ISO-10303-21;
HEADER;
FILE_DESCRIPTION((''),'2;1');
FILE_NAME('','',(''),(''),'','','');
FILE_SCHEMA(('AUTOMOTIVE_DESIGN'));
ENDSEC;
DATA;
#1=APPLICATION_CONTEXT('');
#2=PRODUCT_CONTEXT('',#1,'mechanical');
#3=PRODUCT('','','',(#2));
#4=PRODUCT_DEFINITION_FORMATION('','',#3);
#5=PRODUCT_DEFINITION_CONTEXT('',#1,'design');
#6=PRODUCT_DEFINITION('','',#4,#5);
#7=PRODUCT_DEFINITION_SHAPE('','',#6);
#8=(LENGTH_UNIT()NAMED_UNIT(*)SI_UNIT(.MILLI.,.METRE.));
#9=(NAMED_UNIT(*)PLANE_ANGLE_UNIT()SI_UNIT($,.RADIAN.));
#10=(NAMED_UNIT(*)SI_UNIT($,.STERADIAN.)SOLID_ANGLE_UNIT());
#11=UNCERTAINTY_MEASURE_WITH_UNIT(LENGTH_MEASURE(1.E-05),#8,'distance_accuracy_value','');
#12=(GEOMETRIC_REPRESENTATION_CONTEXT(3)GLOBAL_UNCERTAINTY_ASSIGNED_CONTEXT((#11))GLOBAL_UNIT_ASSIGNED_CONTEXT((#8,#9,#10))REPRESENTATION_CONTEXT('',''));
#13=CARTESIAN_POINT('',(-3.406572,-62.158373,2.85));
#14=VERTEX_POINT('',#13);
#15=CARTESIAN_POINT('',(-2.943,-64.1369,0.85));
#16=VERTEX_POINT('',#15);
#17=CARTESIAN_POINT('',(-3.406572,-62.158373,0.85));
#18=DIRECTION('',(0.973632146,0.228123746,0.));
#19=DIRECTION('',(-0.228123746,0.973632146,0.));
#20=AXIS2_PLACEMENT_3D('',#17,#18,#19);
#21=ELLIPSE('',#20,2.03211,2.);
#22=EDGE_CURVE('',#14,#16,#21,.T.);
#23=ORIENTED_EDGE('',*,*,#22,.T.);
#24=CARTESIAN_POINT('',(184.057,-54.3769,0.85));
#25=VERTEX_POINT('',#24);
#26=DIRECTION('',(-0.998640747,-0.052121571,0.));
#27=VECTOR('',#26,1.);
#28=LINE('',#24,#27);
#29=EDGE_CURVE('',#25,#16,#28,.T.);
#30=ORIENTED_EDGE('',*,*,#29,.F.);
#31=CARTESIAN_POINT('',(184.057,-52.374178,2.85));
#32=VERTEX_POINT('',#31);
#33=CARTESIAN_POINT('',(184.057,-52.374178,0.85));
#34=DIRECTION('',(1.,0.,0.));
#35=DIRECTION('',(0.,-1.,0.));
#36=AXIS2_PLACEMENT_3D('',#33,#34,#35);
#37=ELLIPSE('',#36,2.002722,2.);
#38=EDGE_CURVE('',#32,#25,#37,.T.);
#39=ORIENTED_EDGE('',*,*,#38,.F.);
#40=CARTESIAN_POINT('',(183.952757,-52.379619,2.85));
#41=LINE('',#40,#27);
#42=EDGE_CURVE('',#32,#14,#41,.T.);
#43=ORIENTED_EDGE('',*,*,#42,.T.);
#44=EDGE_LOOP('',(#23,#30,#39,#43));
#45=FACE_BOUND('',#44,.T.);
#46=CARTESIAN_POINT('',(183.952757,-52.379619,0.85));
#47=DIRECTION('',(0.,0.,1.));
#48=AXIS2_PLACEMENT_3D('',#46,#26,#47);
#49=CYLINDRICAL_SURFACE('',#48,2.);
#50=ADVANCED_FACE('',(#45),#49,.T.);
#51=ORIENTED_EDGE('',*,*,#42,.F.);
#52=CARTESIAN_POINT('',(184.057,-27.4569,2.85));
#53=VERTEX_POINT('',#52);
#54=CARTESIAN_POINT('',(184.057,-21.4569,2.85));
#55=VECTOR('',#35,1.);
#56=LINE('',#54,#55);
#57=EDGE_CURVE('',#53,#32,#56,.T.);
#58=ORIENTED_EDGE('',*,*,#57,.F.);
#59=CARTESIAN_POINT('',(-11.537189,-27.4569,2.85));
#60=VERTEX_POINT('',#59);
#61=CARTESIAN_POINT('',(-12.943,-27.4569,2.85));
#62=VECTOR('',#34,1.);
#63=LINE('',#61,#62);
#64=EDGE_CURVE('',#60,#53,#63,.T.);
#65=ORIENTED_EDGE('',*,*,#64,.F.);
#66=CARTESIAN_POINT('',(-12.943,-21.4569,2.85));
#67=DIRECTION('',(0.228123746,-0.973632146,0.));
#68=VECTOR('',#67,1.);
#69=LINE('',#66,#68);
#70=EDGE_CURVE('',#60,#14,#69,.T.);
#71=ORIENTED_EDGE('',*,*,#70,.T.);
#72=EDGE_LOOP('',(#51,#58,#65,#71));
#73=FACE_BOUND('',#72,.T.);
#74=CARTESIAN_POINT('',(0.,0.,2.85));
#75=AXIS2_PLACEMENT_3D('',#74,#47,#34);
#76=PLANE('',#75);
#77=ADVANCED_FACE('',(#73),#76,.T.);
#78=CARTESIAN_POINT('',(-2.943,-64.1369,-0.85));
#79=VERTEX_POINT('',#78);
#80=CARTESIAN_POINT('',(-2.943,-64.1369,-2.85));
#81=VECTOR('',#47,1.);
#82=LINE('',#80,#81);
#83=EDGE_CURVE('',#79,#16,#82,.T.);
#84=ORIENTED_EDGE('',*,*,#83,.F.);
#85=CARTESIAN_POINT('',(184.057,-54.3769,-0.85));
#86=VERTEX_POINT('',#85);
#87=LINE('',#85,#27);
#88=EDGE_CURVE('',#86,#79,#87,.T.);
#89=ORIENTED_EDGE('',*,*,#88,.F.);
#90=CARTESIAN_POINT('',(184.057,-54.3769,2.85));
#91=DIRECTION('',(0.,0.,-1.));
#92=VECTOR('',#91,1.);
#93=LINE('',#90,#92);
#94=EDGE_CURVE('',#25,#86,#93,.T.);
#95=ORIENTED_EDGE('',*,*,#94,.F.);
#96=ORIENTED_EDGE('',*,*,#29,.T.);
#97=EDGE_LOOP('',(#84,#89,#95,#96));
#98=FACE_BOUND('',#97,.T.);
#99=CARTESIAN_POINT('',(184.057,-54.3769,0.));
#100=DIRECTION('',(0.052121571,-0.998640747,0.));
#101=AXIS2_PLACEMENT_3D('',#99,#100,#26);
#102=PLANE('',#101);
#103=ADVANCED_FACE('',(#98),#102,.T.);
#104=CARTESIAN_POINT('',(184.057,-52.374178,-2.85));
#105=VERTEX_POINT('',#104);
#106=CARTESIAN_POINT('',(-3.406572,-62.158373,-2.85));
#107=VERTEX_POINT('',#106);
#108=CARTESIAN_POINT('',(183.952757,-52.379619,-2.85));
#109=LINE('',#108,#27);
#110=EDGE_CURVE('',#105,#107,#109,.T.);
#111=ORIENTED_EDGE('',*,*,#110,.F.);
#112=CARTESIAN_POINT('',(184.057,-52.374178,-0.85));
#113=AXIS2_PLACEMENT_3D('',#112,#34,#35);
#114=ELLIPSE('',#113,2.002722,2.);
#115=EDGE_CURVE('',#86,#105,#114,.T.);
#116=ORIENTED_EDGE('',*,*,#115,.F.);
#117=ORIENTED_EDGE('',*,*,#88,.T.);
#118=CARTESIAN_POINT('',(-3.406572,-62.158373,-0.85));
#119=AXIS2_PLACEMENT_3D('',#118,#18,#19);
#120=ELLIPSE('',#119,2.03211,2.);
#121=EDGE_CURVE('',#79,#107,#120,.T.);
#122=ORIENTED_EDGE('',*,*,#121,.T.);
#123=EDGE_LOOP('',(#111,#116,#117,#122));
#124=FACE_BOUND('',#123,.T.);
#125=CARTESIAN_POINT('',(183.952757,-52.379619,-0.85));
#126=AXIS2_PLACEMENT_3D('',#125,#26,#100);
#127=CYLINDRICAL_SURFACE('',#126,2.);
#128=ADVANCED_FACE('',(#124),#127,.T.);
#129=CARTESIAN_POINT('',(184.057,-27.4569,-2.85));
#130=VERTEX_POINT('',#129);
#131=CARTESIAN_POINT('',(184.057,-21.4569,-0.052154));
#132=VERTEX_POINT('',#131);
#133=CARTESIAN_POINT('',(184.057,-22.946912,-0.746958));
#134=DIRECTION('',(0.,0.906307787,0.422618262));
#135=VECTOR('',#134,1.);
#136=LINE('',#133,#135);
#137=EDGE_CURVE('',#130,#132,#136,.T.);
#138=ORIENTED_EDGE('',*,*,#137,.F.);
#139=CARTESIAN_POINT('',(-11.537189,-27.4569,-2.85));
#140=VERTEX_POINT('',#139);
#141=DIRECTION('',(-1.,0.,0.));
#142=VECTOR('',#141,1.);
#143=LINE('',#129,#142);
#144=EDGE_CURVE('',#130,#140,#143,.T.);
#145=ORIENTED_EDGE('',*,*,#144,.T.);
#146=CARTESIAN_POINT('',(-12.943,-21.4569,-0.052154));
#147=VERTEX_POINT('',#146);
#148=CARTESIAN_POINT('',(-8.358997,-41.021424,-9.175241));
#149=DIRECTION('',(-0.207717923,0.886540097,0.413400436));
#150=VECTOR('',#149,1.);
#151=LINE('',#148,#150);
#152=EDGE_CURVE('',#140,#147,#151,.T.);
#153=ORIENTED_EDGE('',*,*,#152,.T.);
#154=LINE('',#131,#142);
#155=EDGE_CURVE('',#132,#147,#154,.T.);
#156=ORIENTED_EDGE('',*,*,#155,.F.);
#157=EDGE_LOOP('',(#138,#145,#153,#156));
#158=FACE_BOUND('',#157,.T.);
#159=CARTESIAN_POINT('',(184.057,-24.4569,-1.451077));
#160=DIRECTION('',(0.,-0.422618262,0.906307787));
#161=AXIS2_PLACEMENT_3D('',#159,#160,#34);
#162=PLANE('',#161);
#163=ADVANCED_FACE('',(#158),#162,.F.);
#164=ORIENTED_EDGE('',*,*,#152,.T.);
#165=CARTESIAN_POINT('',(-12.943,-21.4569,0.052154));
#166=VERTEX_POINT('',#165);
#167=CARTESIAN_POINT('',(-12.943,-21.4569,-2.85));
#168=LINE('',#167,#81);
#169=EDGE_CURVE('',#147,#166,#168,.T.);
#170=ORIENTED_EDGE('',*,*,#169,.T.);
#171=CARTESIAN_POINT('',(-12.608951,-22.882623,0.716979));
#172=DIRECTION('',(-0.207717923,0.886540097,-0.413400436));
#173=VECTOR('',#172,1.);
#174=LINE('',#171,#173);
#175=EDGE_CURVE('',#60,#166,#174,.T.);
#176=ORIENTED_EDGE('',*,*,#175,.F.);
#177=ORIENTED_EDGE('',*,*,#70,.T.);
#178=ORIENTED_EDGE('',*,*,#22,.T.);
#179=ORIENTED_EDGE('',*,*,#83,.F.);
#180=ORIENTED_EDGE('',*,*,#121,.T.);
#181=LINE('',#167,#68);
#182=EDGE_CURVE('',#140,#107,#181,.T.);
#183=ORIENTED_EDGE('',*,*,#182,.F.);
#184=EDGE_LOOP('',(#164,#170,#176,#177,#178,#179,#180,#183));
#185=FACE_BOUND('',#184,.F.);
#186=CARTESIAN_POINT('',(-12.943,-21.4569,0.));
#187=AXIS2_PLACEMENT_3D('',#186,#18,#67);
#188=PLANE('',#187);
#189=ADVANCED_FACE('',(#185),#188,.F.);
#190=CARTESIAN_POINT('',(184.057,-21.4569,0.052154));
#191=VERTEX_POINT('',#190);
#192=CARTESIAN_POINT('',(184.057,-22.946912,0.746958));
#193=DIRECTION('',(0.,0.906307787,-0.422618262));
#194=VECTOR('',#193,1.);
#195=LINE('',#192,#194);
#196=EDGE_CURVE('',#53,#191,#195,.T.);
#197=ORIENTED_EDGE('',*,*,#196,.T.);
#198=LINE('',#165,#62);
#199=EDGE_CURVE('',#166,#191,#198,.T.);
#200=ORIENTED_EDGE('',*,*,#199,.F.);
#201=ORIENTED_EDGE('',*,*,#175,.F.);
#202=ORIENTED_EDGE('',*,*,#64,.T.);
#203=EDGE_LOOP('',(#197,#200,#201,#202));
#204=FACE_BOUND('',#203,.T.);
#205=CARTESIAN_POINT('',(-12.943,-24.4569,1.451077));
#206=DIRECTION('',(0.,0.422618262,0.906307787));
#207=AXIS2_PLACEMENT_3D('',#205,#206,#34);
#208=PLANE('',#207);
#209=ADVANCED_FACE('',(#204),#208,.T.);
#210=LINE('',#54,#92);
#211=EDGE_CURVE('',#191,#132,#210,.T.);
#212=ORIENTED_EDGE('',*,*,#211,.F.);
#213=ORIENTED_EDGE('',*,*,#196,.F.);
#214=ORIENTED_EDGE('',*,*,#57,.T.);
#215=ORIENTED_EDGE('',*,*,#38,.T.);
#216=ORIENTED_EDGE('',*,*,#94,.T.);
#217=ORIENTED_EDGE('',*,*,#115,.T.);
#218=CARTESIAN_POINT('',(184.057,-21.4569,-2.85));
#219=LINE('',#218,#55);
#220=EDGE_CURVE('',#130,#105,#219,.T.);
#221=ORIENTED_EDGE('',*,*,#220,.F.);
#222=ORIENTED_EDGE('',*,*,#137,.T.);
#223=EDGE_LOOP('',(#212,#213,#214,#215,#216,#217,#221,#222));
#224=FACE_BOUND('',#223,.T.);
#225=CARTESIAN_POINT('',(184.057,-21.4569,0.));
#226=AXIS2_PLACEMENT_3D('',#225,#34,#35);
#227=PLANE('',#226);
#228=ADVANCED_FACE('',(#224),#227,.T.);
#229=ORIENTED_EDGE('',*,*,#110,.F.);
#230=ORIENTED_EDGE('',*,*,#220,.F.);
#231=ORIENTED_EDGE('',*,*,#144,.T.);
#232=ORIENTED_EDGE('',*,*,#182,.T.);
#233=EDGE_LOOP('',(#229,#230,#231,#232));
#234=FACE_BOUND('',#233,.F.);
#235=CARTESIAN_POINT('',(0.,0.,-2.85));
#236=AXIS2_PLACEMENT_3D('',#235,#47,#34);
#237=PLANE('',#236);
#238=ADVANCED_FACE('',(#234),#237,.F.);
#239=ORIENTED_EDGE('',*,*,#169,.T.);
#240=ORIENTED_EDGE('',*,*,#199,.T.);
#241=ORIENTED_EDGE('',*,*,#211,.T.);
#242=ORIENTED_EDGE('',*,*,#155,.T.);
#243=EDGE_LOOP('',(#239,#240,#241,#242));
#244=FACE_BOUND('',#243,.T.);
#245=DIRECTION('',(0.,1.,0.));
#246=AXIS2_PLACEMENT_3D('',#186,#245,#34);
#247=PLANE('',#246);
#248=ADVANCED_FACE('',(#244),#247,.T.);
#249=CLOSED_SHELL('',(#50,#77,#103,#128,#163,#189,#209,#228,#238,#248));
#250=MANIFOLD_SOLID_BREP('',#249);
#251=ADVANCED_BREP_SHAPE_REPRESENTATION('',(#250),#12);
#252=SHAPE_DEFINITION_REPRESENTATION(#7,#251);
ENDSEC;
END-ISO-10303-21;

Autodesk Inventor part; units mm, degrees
ref_plane "YZ Plane" through (0, 0, 0) normal (1, 0, 0) x (0, 1, 0)
ref_plane "XZ Plane" through (0, 0, 0) normal (0, 1, 0) x (-1, 0, 0)
ref_plane "XY Plane" through (0, 0, 0) normal (0, 0, 1) x (1, 0, 0)
sketch "Sketch1" plane through (0, 0, 0) normal (0, 0, 1) x (1, 0, 0)
  line L0 (-22.943, -21.4569) -> (193.057, -21.4569)
  line L1 (-22.943, -21.4569) -> (-12.943, -21.4569)
  line L2 (-12.943, -21.4569) -> (-2.943, -21.4569)
  line L3 (-2.943, -21.4569) -> (-2.943, -64.1369)
  line L4 (-22.943, -21.4569) -> (184.057, -21.4569)
  line L5 (184.057, -21.4569) -> (184.057, -54.3769)
  line L6 (184.057, -54.3769) -> (-2.943, -64.1369)
  line L7 (-12.943, -21.4569) -> (-2.943, -64.1369)
  line L8 (184.057, -21.4569) -> (184.057, 33.1531)
  line L9 (-22.943, -21.4569) -> (-22.943, 89.8331)
  line L10 (-22.943, 89.8331) -> (184.057, 33.1531)
  line L11 (184.057, 33.1531) -> (184.057, 34.1531)
  line L12 (184.057, 34.1531) -> (193.057, 31.6888)
  line L13 (193.057, -21.4569) -> (193.057, 31.6888)
  line L14 (184.057, -54.3769) -> (193.057, -53.9072)
  line L15 (193.057, -21.4569) -> (193.057, -53.9072)
  line L16 (-22.943, -21.4569) -> (-32.943, -21.4569)
  line L17 (-32.943, -21.4569) -> (-42.943, -21.4569)
  line L18 (-22.943, -21.4569) -> (-229.943, -21.4569)
  line L19 (-229.943, -21.4569) -> (-229.943, -54.3769)
  line L20 (-42.943, -21.4569) -> (-42.943, -64.1369)
  line L21 (-229.943, -54.3769) -> (-42.943, -64.1369)
  line L22 (-32.943, -21.4569) -> (-42.943, -64.1369)
  line L23 (-238.943, -21.4569) -> (-238.943, -53.9072)
  line L24 (-229.943, -54.3769) -> (-238.943, -53.9072)
  line L25 (-22.943, -21.4569) -> (-238.943, -21.4569)
  line L26 (-238.943, -21.4569) -> (-238.943, 31.6888)
  line L27 (-229.943, 34.1531) -> (-238.943, 31.6888)
  line L28 (-229.943, -21.4569) -> (-229.943, 33.1531)
  line L29 (-229.943, 33.1531) -> (-229.943, 34.1531)
  line L30 (-22.943, 89.8331) -> (-229.943, 33.1531)
  point P0 (0, 0)
  dimension "d0" = 216
  dimension "d1" = 10
  dimension "d2" = 10
  dimension "d3" = 42.68
  dimension "d4" = 207
  dimension "d5" = 32.92
  dimension "d6" = 54.61
  dimension "d7" = 111.29
  dimension "d8" = 1
extrude "Extrusion1" add sketch "Sketch1" along normal mid plane 5.7 contours L0 L3 L7 | L0 L5 L6 L3
chamfer "Chamfer1" distance 6 angle 25 1 edges at (85.557, -21.4569, -2.85) measured on face at (56.057, -35.6836, -2.85)
fillet "Fillet1" radius 2 1 edges at (90.557, -59.2569, 2.85)
fillet "Fillet2" radius 2 1 edges at (90.557, -59.2569, -2.85)
chamfer "Chamfer2" distance 6 angle 25 1 edges at (85.557, -21.4569, 2.85) measured on face at (55.9024, -35.0241, 2.85)
